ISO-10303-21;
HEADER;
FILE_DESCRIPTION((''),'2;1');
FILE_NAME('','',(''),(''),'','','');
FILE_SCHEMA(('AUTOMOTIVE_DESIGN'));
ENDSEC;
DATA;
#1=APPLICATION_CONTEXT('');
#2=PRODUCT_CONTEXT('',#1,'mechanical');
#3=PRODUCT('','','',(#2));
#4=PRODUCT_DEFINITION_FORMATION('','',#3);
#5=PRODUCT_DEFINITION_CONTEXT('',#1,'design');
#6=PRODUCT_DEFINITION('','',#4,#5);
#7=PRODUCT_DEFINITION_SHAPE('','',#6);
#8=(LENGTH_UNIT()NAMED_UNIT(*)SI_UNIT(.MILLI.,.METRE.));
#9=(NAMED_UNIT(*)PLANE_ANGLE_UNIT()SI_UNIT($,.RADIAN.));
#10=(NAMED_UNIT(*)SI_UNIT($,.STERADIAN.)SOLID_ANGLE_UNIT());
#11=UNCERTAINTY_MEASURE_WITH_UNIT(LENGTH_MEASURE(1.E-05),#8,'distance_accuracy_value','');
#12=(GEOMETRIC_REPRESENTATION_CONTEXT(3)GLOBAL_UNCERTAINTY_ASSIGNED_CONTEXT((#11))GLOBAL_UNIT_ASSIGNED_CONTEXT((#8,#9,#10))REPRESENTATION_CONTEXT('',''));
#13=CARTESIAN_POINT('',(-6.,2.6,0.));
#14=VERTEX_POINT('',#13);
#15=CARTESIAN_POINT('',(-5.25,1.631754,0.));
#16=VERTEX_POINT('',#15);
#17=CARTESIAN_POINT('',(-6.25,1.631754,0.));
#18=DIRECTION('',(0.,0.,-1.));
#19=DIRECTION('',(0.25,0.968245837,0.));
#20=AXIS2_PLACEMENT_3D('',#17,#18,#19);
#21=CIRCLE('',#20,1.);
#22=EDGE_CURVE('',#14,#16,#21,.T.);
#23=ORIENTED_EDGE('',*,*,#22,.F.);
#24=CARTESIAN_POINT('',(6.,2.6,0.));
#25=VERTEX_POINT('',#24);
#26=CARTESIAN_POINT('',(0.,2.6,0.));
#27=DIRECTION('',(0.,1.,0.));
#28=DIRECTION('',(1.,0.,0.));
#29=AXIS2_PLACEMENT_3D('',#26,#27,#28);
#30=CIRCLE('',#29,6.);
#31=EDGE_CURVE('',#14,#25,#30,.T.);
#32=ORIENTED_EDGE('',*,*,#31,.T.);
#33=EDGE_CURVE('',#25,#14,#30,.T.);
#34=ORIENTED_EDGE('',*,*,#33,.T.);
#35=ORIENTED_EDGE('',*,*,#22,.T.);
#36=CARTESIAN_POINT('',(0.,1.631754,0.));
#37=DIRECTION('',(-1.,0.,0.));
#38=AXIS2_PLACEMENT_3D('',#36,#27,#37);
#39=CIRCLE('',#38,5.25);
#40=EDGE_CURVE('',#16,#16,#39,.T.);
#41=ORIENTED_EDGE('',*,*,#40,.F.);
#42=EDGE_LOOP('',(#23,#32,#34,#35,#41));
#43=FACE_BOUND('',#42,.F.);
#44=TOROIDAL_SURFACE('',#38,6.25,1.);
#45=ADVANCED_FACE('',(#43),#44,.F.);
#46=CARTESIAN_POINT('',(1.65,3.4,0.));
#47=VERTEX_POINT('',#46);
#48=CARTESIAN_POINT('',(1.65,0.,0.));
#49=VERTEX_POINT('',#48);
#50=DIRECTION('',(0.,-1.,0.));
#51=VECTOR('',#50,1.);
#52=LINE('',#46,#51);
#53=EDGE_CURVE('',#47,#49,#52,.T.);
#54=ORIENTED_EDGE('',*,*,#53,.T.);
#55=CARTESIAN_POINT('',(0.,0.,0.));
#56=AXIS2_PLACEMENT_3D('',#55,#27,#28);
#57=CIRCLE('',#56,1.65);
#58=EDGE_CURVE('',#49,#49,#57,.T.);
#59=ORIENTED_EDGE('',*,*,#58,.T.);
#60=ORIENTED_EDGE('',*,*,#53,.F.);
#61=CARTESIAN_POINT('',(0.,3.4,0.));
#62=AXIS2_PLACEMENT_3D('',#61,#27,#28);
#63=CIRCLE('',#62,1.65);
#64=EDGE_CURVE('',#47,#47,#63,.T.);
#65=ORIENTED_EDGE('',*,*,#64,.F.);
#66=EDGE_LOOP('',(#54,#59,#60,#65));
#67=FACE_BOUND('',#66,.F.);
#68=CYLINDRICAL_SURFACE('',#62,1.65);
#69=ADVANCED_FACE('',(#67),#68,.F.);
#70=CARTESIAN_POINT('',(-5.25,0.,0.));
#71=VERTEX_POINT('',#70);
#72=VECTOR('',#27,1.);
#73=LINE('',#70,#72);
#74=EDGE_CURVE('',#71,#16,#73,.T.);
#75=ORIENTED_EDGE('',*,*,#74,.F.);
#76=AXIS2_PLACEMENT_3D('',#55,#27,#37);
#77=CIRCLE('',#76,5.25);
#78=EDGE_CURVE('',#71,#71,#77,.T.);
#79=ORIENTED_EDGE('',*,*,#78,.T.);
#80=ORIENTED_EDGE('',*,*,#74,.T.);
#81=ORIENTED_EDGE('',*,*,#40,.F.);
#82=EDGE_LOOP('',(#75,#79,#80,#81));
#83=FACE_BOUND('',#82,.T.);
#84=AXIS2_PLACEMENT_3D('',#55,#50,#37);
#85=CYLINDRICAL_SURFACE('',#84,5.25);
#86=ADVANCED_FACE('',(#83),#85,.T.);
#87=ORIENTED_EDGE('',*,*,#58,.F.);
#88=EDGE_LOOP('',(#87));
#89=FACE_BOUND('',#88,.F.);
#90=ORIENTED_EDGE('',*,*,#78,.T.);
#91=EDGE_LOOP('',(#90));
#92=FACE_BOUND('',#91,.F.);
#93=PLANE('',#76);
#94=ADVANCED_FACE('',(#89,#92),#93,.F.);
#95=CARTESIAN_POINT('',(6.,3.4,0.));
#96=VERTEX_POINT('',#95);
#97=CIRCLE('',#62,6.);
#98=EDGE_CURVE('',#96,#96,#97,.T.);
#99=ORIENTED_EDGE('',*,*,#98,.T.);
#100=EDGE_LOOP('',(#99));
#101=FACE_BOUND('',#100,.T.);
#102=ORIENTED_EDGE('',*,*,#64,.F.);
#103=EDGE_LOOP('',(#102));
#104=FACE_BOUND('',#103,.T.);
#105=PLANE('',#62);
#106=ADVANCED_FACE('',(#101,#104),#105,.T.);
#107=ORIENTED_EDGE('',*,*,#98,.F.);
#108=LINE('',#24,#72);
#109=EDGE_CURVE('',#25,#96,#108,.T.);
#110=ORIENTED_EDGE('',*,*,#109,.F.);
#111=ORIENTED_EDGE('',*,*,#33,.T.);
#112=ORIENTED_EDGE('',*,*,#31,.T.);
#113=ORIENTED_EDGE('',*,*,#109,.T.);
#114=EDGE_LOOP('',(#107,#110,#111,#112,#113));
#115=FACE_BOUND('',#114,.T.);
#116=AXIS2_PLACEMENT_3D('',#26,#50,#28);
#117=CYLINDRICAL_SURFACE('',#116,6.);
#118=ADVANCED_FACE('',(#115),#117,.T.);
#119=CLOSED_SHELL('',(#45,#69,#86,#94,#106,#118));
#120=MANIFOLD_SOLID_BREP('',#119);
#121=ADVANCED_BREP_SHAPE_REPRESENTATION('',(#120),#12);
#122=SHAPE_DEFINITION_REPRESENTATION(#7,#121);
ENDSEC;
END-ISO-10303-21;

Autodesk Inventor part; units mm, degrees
ref_plane "YZ Plane" through (0, 0, 0) normal (1, 0, 0) x (0, 1, 0)
ref_plane "XZ Plane" through (0, 0, 0) normal (0, 1, 0) x (-1, 0, 0)
ref_plane "XY Plane" through (0, 0, 0) normal (0, 0, 1) x (1, 0, 0)
sketch "Boceto1" plane through (0, 0, 0) normal (0, 1, 0) x (-1, 0, 0)
  circle A0 centre (0, 0) radius 5.25
  dimension "d0" = 10.5
extrude "Extrusión1" add sketch "Boceto1" along normal blind 2.6
sketch "Boceto2" plane through (0, 2.6, 0) normal (0, 1, 0) x (1, 0, 0)
  circle A0 centre (0, 0) radius 6
  dimension "d3" = 12
extrude "Extrusión2" add sketch "Boceto2" along normal blind 0.8
sketch "Boceto3" plane through (0, 3.4, 0) normal (0, 1, 0) x (1, 0, 0)
  circle A0 centre (0, 0) radius 1.65
  dimension "d6" = 3.3
extrude "Extrusión3" cut sketch "Boceto3" against normal through all
fillet "Empalme1" radius 1 1 edges at (5.25, 2.6, 0)
properties part number "RubberSupport"
